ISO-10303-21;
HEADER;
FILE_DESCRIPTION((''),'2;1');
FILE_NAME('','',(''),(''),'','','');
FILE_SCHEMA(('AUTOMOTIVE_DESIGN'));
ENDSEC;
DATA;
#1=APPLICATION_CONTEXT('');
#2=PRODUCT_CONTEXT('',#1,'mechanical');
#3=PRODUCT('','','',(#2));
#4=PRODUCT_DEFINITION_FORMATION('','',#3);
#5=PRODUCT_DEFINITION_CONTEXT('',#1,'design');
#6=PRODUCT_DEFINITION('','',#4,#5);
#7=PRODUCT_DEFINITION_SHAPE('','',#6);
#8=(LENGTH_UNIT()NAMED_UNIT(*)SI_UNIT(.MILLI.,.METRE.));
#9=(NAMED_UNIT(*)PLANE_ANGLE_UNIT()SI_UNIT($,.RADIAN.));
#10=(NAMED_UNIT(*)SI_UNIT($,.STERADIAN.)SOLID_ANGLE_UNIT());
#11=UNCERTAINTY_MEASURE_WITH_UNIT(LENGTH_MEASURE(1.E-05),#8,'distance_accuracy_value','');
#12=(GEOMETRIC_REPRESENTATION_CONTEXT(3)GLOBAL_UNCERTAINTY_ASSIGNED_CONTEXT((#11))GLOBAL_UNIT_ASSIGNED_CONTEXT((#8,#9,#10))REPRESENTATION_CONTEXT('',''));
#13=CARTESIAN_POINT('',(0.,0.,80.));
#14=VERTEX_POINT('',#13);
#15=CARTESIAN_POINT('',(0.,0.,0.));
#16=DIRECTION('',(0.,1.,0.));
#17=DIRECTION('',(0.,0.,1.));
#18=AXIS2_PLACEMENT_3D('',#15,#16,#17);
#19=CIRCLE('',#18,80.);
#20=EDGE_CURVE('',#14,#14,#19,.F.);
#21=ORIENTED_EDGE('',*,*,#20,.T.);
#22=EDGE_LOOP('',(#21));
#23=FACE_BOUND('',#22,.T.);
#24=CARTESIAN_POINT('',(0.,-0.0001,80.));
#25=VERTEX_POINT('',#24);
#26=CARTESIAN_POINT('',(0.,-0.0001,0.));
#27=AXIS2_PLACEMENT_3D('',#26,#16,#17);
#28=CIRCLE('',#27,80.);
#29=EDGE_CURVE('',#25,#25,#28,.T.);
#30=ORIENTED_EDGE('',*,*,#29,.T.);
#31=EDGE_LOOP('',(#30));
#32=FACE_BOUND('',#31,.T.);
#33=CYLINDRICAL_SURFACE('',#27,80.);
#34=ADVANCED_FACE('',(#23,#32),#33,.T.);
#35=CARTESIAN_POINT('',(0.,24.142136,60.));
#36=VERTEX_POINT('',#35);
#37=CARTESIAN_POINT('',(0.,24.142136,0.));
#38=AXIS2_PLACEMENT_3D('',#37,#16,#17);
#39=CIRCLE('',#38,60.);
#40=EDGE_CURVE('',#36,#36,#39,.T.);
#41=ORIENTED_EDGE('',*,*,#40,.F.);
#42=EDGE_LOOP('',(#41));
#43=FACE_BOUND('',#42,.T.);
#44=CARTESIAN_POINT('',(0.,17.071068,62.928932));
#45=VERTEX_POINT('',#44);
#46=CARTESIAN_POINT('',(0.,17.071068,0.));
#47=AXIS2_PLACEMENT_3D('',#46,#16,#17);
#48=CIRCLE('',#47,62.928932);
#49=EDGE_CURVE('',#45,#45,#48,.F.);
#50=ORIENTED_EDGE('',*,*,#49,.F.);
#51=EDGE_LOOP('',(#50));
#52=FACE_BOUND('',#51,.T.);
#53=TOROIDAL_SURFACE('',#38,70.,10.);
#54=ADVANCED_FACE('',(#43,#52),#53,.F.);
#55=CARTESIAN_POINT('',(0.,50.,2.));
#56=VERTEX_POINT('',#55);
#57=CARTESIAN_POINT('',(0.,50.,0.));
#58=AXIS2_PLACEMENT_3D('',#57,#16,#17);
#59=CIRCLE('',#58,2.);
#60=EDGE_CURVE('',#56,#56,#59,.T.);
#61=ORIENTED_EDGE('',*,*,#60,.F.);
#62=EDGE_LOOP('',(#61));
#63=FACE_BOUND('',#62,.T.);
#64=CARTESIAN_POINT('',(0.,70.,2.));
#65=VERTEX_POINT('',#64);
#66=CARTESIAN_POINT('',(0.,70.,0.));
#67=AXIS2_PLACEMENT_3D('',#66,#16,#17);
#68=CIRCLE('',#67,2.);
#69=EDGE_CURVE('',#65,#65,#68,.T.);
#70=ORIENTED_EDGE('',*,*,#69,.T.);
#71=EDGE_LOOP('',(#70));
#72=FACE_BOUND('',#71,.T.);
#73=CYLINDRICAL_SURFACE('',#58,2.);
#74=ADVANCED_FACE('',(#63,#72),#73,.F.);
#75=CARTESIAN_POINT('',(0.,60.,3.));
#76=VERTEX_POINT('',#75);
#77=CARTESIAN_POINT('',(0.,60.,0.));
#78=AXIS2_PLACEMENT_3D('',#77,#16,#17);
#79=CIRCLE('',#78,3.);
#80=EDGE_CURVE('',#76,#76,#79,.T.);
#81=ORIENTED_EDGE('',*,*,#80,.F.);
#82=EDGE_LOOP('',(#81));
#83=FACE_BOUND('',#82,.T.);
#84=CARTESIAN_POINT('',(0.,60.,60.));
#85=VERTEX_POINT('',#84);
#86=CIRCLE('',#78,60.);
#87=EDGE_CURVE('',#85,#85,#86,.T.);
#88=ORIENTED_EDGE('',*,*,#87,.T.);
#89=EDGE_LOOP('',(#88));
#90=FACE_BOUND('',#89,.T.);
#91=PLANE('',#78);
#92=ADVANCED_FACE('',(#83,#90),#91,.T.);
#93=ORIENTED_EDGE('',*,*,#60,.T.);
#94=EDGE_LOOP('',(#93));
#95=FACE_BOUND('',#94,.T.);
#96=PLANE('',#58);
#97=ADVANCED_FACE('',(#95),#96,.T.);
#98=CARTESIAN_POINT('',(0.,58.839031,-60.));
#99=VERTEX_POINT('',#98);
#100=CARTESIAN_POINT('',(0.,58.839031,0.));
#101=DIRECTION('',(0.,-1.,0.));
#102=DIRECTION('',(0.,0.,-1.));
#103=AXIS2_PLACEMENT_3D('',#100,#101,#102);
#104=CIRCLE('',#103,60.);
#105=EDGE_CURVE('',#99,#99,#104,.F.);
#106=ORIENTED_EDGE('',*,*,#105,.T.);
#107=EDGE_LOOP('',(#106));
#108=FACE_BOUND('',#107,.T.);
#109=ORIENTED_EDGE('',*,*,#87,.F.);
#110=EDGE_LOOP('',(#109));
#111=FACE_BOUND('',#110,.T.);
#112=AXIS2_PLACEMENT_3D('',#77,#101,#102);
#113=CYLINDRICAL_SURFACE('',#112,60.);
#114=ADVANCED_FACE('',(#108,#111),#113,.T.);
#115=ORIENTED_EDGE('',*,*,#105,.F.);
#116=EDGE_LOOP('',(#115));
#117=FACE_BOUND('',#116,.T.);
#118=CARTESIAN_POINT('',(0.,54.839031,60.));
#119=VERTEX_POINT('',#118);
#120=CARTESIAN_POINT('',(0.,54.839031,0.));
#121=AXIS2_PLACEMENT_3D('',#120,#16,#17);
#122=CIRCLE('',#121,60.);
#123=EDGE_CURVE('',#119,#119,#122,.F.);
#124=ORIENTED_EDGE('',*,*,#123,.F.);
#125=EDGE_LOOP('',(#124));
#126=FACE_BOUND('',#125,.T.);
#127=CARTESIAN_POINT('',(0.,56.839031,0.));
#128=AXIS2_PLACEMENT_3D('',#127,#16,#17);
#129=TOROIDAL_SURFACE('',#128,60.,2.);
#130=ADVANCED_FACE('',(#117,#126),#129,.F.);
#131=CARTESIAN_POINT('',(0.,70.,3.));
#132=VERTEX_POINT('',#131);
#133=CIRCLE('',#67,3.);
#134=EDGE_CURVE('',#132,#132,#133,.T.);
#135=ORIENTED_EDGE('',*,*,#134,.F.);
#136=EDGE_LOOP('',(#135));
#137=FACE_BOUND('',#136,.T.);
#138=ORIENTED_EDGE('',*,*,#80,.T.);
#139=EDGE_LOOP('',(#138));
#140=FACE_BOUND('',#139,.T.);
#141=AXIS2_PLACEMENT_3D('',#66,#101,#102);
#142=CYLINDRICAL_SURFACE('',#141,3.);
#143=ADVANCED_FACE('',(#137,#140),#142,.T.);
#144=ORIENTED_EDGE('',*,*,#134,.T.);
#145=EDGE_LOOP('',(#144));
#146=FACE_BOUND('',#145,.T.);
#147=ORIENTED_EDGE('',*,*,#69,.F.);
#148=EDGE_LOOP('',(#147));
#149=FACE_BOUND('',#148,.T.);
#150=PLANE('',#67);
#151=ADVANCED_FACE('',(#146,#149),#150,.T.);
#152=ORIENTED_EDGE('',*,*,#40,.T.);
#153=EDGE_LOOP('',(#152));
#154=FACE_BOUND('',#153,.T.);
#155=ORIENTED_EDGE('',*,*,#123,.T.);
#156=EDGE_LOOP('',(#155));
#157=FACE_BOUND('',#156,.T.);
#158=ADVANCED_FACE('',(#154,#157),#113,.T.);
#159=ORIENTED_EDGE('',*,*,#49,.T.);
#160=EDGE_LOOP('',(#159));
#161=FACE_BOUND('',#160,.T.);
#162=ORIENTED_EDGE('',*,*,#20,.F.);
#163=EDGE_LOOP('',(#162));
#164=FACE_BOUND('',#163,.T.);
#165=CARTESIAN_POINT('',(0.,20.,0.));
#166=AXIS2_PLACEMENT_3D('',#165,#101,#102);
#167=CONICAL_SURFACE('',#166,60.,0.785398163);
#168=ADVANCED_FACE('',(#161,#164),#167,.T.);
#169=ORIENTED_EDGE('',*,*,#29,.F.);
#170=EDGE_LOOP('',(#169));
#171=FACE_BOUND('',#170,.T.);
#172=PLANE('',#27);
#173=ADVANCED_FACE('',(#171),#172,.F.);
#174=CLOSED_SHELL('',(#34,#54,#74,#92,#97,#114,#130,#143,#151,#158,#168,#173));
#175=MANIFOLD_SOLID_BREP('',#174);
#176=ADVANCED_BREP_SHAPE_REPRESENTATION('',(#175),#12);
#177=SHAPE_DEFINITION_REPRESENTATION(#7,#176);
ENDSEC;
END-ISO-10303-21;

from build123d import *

# Parameters (mm, degrees)
BOSS_EXTRUDE1_DEPTH      = 20
BOSS_EXTRUDE1_DEPTH_BACK = 0.0001
SKETCH1_R                = 80
SKETCH2_R                = 60
BOSS_EXTRUDE2_DEPTH      = 40
SKETCH3_R                = 3
BOSS_EXTRUDE3_DEPTH      = 10
SKETCH4_R                = 2
CUT_EXTRUDE1_DEPTH       = 20
CHAMFER1_SIZE            = 20
SKETCH5_R                = 2


with BuildPart() as part:
    # Sketch1 → Boss-Extrude1 (new, two sides: drawn at the far end of the back side and taken through both)
    with BuildSketch(Plane(origin=(0, 0, 0), x_dir=(1, 0, 0), z_dir=(0, 1, 0)).offset(-BOSS_EXTRUDE1_DEPTH_BACK)):
        with Locations(Location((0, 0, 0), (0, 0, 270))):
            Circle(SKETCH1_R)
    extrude(amount=BOSS_EXTRUDE1_DEPTH + BOSS_EXTRUDE1_DEPTH_BACK)

    # Sketch2 → Boss-Extrude2 (add)
    with BuildSketch(Plane(origin=(0, 20, 0), x_dir=(1, 0, 0), z_dir=(0, 1, 0))):
        with Locations(Location((0, 0, 0), (0, 0, 270))):
            Circle(SKETCH2_R)
    extrude(amount=BOSS_EXTRUDE2_DEPTH)

    # Sketch3 → Boss-Extrude3 (add)
    with BuildSketch(Plane(origin=(0, 60, 0), x_dir=(1, 0, 0), z_dir=(0, 1, 0))):
        with Locations(Location((0, 0, 0), (0, 0, 270))):
            Circle(SKETCH3_R)
    extrude(amount=BOSS_EXTRUDE3_DEPTH)

    # Sketch4 → Cut-Extrude1 (cut)
    with BuildSketch(Plane(origin=(0, 70, 0), x_dir=(1, 0, 0), z_dir=(0, 1, 0))):
        with Locations(Location((0, 0, 0), (0, 0, 270))):
            Circle(SKETCH4_R)
    extrude(amount=-CUT_EXTRUDE1_DEPTH, mode=Mode.SUBTRACT)

    # Chamfer1
    chamfer1_edges = [part.edges().sort_by_distance(p)[0] for p in [
        (0, 20, -80),
    ]]
    chamfer(chamfer1_edges, length=CHAMFER1_SIZE - 0.0001)  # a hair under: the kernel refuses the full size

    # Sketch5 → Cut-Revolve1 (revolve, cut)
    with BuildSketch(Plane(origin=(0, 0, 0), x_dir=(0, 0, -1), z_dir=(1, 0, 0))):
        with Locations((-60, 56.839030786)):
            Circle(SKETCH5_R)
    revolve(axis=Axis((0, 60, 0), (0, -1, 0)), mode=Mode.SUBTRACT)

    # Fillet1: read off the stored shape, not the designer's step
    # Fillet1 outline → Fillet1 (revolve)
    with BuildSketch(Plane.XY):
        with BuildLine():
            ThreePointArc((62.928932188, 17.071067812), (60.761204675, 20.3153013), (60, 24.142135624))
            Line((60, 24.142135624), (60, 17.071067812))
            Line((60, 17.071067812), (62.928932188, 17.071067812))
        make_face()
    revolve(axis=Axis((0, 0, 0), (0, 1, 0)))


solid = part.part
